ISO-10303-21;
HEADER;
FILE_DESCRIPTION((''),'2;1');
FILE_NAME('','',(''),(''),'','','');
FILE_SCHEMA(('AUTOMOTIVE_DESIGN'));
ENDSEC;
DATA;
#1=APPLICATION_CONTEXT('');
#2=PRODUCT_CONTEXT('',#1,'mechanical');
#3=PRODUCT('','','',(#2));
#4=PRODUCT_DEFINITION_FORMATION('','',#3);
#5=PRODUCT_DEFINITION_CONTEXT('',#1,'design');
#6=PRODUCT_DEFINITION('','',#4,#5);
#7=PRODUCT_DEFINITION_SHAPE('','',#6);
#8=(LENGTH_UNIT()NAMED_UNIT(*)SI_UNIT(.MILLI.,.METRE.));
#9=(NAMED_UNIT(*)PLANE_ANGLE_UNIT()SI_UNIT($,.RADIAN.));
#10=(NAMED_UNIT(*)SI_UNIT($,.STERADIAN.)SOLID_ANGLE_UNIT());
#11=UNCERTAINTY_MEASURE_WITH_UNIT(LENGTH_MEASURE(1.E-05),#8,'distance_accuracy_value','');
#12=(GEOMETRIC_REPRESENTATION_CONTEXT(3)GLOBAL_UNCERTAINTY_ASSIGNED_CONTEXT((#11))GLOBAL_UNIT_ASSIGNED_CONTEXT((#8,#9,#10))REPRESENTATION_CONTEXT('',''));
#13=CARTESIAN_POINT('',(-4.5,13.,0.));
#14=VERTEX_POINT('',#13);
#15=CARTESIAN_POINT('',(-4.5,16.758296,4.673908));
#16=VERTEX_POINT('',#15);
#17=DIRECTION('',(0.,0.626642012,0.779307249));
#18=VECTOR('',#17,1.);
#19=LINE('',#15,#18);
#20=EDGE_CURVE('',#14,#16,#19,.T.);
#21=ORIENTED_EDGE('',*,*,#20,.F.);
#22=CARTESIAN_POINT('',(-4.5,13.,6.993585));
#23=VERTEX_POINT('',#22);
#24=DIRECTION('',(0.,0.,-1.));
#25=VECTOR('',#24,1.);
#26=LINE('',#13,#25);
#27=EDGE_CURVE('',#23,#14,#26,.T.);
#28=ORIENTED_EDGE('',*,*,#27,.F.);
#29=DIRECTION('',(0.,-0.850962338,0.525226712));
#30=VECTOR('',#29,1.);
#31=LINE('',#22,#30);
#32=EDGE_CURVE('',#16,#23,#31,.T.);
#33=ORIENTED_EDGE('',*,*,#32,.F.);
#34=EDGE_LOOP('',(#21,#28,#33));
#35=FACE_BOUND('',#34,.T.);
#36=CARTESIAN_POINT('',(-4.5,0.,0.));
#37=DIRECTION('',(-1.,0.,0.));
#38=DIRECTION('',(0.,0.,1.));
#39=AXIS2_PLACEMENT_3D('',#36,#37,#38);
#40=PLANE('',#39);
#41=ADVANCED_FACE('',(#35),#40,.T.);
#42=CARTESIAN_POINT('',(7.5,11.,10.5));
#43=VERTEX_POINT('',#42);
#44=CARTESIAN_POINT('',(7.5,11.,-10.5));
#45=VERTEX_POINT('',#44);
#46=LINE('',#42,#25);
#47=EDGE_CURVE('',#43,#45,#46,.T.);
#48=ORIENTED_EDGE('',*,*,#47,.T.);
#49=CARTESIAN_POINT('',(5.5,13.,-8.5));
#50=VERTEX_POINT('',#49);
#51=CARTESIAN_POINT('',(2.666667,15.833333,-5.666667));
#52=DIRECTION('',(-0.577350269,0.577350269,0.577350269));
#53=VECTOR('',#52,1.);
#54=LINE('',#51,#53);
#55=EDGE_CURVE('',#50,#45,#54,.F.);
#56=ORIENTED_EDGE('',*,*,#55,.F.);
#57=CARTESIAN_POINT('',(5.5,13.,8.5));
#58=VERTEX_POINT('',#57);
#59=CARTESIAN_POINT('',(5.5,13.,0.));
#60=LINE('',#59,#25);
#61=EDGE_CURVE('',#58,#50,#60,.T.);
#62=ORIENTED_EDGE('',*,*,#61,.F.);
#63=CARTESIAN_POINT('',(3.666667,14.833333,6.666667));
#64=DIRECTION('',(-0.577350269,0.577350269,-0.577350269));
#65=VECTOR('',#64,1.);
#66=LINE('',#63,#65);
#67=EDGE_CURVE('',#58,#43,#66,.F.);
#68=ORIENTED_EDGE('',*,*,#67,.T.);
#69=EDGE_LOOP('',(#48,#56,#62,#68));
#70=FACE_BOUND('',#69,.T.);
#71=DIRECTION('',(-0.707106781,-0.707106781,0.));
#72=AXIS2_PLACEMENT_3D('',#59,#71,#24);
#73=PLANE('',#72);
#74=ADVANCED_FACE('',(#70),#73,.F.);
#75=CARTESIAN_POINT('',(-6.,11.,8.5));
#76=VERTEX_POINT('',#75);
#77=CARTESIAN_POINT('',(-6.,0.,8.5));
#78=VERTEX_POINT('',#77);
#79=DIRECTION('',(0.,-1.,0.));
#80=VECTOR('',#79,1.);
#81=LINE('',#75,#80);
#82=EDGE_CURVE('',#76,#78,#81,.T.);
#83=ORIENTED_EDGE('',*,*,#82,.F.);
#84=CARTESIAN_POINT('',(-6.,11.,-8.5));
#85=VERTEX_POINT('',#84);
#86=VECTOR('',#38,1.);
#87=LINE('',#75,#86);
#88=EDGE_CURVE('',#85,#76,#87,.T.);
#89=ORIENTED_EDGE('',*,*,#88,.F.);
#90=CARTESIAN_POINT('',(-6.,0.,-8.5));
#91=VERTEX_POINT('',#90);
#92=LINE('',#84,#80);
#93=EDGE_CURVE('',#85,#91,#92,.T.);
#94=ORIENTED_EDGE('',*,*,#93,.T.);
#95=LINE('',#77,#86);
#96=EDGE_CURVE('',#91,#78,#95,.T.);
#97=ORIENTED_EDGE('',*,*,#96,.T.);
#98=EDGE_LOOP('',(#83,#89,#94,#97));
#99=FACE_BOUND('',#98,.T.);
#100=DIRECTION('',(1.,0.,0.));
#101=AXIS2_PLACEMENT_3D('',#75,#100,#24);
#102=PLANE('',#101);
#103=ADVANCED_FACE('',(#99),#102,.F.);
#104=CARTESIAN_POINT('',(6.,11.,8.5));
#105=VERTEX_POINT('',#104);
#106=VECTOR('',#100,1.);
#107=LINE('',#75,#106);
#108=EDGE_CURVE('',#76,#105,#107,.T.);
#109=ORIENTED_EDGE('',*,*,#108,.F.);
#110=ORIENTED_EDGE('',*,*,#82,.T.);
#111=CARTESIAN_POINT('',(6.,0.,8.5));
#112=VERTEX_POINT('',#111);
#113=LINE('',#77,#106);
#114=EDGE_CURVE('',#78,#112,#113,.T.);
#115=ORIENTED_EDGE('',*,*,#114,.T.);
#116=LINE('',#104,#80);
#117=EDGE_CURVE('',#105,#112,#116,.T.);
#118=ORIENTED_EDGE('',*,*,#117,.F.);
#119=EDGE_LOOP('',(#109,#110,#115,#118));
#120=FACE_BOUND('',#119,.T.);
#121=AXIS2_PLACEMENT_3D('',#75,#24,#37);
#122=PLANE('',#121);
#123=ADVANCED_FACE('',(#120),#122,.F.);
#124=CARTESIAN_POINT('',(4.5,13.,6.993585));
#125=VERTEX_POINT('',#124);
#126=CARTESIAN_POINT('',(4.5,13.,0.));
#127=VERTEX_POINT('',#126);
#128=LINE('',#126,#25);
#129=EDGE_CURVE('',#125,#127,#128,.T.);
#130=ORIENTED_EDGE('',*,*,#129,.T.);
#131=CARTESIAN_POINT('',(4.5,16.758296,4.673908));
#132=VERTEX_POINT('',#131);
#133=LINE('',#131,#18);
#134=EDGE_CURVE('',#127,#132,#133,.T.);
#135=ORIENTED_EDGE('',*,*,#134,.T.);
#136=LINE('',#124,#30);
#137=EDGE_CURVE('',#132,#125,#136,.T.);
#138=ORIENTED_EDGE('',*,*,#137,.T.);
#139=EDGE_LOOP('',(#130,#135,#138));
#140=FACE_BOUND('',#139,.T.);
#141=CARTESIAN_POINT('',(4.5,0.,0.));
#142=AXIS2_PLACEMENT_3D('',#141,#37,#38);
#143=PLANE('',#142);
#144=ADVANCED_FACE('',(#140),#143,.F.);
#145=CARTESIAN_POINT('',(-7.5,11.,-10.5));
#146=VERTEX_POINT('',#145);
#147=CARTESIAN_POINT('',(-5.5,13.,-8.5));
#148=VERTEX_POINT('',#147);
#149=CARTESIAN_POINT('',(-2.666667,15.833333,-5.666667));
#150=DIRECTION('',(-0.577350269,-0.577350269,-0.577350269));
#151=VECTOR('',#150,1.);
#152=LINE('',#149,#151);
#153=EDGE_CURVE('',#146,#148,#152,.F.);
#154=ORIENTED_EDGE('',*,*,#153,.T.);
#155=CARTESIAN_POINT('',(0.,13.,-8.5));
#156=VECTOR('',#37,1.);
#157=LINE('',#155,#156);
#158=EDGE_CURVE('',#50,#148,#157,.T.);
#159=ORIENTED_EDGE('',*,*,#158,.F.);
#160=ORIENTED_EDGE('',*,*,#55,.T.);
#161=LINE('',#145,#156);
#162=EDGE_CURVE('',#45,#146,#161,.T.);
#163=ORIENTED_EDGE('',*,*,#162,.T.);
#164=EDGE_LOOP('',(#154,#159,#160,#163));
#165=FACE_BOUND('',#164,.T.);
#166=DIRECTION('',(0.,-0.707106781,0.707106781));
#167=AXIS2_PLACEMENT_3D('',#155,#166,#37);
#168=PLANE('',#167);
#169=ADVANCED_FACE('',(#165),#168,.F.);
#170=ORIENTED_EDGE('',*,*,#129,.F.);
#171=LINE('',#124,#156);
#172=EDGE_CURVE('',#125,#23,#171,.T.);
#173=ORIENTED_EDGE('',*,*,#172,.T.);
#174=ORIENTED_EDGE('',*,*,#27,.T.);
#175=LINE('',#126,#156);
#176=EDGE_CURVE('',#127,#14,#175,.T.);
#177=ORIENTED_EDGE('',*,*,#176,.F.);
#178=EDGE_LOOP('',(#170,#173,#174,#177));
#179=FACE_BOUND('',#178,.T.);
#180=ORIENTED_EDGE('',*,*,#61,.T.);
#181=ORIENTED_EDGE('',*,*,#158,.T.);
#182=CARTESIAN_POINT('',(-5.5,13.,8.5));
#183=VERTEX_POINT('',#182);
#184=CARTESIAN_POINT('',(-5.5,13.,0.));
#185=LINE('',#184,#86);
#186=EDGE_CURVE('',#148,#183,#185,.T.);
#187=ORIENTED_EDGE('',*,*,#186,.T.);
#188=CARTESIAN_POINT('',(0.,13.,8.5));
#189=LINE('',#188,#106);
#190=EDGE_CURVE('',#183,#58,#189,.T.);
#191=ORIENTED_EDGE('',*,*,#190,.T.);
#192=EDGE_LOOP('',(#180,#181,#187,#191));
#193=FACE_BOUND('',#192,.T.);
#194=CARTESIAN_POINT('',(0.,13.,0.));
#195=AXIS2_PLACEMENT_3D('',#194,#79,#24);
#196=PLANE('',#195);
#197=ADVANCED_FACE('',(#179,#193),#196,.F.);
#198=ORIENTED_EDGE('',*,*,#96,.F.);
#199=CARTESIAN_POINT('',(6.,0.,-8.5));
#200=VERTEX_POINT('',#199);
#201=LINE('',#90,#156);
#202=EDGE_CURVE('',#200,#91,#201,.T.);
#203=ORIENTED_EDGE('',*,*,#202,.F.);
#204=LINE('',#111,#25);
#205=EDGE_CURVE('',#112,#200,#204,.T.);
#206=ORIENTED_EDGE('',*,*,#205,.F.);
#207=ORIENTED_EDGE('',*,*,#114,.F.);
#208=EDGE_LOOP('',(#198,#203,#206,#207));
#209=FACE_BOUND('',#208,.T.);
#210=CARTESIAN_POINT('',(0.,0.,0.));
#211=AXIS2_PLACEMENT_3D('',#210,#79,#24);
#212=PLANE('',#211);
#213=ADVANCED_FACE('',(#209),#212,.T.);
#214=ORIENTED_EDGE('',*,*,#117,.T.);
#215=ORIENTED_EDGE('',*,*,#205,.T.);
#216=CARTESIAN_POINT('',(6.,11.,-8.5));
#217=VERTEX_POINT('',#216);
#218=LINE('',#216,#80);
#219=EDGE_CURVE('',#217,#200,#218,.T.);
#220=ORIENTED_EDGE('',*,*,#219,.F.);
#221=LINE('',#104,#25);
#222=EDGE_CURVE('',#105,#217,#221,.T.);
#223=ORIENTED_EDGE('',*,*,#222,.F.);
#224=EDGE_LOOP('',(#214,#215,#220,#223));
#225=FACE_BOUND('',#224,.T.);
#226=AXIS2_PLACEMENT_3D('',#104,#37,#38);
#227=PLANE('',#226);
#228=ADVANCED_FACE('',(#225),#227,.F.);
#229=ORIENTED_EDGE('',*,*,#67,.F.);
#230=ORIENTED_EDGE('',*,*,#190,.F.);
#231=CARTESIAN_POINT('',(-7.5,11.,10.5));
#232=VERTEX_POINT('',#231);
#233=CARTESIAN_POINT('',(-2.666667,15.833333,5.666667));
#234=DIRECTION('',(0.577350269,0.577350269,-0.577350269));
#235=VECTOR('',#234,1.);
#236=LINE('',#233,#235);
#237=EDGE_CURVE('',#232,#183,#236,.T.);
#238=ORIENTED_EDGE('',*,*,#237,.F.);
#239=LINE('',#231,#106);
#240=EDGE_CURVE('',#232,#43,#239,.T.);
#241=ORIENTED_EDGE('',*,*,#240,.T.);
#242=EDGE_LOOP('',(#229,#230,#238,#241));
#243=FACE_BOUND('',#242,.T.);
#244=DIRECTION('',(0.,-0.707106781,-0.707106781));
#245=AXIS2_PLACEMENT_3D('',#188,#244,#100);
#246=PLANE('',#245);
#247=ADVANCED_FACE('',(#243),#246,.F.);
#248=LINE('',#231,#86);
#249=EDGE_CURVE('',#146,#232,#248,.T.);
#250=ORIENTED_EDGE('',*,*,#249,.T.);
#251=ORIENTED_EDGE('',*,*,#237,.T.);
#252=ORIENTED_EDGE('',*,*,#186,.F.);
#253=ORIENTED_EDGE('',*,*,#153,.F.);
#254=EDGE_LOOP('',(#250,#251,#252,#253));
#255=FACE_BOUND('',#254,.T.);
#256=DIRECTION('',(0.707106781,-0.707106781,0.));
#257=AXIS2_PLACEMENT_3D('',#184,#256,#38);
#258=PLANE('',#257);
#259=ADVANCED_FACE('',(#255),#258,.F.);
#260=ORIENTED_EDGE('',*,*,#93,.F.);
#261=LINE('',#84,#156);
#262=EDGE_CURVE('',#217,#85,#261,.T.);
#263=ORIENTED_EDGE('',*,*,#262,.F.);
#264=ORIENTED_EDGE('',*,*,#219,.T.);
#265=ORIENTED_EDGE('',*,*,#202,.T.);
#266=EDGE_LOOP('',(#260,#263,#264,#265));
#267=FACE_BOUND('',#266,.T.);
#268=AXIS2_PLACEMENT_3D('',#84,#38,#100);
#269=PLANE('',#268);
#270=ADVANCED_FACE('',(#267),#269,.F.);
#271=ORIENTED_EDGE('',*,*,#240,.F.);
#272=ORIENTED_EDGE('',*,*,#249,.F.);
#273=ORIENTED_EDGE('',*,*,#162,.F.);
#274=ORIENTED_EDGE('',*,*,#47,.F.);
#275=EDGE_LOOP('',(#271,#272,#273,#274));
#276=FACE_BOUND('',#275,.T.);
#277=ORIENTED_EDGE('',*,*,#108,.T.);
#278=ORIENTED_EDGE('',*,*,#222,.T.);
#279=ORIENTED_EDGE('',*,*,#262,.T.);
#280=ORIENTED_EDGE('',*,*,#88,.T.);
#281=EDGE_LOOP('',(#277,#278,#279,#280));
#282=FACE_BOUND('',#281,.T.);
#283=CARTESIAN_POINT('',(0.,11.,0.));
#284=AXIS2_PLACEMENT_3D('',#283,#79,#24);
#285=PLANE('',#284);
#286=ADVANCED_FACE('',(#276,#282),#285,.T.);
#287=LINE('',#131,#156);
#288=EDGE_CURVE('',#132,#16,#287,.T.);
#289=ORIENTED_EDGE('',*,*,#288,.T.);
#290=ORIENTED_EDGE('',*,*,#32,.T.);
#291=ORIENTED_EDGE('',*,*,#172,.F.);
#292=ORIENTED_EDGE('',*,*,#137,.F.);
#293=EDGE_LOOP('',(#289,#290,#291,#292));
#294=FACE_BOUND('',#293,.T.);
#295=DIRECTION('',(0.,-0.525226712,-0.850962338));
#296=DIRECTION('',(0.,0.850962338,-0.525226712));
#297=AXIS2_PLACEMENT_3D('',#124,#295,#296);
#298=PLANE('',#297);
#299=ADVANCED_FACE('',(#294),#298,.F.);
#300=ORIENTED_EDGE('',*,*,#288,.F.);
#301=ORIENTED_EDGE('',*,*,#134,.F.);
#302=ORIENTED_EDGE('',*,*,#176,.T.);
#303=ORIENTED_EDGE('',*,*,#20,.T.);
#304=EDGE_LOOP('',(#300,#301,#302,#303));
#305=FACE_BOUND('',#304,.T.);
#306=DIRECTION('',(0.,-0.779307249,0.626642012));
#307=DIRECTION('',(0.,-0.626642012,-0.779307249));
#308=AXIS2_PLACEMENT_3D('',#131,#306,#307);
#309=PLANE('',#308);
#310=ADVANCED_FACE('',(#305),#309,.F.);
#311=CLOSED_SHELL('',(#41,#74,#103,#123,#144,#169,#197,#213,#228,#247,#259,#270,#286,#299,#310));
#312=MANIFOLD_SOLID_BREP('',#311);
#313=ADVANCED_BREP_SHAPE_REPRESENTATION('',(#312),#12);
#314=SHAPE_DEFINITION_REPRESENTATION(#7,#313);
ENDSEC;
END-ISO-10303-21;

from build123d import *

# Parameters (mm, degrees)
SKETCH_1_W      = 12
SKETCH_1_H      = 17
EXTRUDE_1_DEPTH = 11
SKETCH_2_W      = 15
SKETCH_2_H      = 21
EXTRUDE_2_DEPTH = 2
CHAMFER_1_SIZE  = 2
EXTRUDE_3_DEPTH = 4.5


with BuildPart() as part:
    # 草图1 → 凸台-拉伸1 (new body)
    with BuildSketch(Plane(origin=(0, 0, 0), x_dir=(1, 0, 0), z_dir=(0, 1, 0))):
        Rectangle(SKETCH_1_W, SKETCH_1_H)
    extrude(amount=EXTRUDE_1_DEPTH)

    # 草图2 → 凸台-拉伸2 (add)
    with BuildSketch(Plane(origin=(0, 11, 0), x_dir=(1, 0, 0), z_dir=(0, 1, 0))):
        Rectangle(SKETCH_2_W, SKETCH_2_H)
    extrude(amount=EXTRUDE_2_DEPTH)

    # 倒角1
    chamfer_1_edges = [part.edges().sort_by_distance(p)[0] for p in [
        (0, 13, -10.5),
        (7.5, 13, 0),
        (0, 13, 10.5),
        (-7.5, 13, 0),
    ]]
    chamfer(chamfer_1_edges, length=CHAMFER_1_SIZE - 0.0001)  # a hair under: the kernel refuses the full size

    # 草图3 → 凸台-拉伸3 (add, symmetric)
    with BuildSketch(Plane(origin=(0, 0, 0), x_dir=(0, 0, -1), z_dir=(1, 0, 0))):
        Polygon((-6.993584735, 13), (-4.673908178, 16.758295881), (0, 13), align=None)
    extrude(amount=EXTRUDE_3_DEPTH, both=True)


solid = part.part
